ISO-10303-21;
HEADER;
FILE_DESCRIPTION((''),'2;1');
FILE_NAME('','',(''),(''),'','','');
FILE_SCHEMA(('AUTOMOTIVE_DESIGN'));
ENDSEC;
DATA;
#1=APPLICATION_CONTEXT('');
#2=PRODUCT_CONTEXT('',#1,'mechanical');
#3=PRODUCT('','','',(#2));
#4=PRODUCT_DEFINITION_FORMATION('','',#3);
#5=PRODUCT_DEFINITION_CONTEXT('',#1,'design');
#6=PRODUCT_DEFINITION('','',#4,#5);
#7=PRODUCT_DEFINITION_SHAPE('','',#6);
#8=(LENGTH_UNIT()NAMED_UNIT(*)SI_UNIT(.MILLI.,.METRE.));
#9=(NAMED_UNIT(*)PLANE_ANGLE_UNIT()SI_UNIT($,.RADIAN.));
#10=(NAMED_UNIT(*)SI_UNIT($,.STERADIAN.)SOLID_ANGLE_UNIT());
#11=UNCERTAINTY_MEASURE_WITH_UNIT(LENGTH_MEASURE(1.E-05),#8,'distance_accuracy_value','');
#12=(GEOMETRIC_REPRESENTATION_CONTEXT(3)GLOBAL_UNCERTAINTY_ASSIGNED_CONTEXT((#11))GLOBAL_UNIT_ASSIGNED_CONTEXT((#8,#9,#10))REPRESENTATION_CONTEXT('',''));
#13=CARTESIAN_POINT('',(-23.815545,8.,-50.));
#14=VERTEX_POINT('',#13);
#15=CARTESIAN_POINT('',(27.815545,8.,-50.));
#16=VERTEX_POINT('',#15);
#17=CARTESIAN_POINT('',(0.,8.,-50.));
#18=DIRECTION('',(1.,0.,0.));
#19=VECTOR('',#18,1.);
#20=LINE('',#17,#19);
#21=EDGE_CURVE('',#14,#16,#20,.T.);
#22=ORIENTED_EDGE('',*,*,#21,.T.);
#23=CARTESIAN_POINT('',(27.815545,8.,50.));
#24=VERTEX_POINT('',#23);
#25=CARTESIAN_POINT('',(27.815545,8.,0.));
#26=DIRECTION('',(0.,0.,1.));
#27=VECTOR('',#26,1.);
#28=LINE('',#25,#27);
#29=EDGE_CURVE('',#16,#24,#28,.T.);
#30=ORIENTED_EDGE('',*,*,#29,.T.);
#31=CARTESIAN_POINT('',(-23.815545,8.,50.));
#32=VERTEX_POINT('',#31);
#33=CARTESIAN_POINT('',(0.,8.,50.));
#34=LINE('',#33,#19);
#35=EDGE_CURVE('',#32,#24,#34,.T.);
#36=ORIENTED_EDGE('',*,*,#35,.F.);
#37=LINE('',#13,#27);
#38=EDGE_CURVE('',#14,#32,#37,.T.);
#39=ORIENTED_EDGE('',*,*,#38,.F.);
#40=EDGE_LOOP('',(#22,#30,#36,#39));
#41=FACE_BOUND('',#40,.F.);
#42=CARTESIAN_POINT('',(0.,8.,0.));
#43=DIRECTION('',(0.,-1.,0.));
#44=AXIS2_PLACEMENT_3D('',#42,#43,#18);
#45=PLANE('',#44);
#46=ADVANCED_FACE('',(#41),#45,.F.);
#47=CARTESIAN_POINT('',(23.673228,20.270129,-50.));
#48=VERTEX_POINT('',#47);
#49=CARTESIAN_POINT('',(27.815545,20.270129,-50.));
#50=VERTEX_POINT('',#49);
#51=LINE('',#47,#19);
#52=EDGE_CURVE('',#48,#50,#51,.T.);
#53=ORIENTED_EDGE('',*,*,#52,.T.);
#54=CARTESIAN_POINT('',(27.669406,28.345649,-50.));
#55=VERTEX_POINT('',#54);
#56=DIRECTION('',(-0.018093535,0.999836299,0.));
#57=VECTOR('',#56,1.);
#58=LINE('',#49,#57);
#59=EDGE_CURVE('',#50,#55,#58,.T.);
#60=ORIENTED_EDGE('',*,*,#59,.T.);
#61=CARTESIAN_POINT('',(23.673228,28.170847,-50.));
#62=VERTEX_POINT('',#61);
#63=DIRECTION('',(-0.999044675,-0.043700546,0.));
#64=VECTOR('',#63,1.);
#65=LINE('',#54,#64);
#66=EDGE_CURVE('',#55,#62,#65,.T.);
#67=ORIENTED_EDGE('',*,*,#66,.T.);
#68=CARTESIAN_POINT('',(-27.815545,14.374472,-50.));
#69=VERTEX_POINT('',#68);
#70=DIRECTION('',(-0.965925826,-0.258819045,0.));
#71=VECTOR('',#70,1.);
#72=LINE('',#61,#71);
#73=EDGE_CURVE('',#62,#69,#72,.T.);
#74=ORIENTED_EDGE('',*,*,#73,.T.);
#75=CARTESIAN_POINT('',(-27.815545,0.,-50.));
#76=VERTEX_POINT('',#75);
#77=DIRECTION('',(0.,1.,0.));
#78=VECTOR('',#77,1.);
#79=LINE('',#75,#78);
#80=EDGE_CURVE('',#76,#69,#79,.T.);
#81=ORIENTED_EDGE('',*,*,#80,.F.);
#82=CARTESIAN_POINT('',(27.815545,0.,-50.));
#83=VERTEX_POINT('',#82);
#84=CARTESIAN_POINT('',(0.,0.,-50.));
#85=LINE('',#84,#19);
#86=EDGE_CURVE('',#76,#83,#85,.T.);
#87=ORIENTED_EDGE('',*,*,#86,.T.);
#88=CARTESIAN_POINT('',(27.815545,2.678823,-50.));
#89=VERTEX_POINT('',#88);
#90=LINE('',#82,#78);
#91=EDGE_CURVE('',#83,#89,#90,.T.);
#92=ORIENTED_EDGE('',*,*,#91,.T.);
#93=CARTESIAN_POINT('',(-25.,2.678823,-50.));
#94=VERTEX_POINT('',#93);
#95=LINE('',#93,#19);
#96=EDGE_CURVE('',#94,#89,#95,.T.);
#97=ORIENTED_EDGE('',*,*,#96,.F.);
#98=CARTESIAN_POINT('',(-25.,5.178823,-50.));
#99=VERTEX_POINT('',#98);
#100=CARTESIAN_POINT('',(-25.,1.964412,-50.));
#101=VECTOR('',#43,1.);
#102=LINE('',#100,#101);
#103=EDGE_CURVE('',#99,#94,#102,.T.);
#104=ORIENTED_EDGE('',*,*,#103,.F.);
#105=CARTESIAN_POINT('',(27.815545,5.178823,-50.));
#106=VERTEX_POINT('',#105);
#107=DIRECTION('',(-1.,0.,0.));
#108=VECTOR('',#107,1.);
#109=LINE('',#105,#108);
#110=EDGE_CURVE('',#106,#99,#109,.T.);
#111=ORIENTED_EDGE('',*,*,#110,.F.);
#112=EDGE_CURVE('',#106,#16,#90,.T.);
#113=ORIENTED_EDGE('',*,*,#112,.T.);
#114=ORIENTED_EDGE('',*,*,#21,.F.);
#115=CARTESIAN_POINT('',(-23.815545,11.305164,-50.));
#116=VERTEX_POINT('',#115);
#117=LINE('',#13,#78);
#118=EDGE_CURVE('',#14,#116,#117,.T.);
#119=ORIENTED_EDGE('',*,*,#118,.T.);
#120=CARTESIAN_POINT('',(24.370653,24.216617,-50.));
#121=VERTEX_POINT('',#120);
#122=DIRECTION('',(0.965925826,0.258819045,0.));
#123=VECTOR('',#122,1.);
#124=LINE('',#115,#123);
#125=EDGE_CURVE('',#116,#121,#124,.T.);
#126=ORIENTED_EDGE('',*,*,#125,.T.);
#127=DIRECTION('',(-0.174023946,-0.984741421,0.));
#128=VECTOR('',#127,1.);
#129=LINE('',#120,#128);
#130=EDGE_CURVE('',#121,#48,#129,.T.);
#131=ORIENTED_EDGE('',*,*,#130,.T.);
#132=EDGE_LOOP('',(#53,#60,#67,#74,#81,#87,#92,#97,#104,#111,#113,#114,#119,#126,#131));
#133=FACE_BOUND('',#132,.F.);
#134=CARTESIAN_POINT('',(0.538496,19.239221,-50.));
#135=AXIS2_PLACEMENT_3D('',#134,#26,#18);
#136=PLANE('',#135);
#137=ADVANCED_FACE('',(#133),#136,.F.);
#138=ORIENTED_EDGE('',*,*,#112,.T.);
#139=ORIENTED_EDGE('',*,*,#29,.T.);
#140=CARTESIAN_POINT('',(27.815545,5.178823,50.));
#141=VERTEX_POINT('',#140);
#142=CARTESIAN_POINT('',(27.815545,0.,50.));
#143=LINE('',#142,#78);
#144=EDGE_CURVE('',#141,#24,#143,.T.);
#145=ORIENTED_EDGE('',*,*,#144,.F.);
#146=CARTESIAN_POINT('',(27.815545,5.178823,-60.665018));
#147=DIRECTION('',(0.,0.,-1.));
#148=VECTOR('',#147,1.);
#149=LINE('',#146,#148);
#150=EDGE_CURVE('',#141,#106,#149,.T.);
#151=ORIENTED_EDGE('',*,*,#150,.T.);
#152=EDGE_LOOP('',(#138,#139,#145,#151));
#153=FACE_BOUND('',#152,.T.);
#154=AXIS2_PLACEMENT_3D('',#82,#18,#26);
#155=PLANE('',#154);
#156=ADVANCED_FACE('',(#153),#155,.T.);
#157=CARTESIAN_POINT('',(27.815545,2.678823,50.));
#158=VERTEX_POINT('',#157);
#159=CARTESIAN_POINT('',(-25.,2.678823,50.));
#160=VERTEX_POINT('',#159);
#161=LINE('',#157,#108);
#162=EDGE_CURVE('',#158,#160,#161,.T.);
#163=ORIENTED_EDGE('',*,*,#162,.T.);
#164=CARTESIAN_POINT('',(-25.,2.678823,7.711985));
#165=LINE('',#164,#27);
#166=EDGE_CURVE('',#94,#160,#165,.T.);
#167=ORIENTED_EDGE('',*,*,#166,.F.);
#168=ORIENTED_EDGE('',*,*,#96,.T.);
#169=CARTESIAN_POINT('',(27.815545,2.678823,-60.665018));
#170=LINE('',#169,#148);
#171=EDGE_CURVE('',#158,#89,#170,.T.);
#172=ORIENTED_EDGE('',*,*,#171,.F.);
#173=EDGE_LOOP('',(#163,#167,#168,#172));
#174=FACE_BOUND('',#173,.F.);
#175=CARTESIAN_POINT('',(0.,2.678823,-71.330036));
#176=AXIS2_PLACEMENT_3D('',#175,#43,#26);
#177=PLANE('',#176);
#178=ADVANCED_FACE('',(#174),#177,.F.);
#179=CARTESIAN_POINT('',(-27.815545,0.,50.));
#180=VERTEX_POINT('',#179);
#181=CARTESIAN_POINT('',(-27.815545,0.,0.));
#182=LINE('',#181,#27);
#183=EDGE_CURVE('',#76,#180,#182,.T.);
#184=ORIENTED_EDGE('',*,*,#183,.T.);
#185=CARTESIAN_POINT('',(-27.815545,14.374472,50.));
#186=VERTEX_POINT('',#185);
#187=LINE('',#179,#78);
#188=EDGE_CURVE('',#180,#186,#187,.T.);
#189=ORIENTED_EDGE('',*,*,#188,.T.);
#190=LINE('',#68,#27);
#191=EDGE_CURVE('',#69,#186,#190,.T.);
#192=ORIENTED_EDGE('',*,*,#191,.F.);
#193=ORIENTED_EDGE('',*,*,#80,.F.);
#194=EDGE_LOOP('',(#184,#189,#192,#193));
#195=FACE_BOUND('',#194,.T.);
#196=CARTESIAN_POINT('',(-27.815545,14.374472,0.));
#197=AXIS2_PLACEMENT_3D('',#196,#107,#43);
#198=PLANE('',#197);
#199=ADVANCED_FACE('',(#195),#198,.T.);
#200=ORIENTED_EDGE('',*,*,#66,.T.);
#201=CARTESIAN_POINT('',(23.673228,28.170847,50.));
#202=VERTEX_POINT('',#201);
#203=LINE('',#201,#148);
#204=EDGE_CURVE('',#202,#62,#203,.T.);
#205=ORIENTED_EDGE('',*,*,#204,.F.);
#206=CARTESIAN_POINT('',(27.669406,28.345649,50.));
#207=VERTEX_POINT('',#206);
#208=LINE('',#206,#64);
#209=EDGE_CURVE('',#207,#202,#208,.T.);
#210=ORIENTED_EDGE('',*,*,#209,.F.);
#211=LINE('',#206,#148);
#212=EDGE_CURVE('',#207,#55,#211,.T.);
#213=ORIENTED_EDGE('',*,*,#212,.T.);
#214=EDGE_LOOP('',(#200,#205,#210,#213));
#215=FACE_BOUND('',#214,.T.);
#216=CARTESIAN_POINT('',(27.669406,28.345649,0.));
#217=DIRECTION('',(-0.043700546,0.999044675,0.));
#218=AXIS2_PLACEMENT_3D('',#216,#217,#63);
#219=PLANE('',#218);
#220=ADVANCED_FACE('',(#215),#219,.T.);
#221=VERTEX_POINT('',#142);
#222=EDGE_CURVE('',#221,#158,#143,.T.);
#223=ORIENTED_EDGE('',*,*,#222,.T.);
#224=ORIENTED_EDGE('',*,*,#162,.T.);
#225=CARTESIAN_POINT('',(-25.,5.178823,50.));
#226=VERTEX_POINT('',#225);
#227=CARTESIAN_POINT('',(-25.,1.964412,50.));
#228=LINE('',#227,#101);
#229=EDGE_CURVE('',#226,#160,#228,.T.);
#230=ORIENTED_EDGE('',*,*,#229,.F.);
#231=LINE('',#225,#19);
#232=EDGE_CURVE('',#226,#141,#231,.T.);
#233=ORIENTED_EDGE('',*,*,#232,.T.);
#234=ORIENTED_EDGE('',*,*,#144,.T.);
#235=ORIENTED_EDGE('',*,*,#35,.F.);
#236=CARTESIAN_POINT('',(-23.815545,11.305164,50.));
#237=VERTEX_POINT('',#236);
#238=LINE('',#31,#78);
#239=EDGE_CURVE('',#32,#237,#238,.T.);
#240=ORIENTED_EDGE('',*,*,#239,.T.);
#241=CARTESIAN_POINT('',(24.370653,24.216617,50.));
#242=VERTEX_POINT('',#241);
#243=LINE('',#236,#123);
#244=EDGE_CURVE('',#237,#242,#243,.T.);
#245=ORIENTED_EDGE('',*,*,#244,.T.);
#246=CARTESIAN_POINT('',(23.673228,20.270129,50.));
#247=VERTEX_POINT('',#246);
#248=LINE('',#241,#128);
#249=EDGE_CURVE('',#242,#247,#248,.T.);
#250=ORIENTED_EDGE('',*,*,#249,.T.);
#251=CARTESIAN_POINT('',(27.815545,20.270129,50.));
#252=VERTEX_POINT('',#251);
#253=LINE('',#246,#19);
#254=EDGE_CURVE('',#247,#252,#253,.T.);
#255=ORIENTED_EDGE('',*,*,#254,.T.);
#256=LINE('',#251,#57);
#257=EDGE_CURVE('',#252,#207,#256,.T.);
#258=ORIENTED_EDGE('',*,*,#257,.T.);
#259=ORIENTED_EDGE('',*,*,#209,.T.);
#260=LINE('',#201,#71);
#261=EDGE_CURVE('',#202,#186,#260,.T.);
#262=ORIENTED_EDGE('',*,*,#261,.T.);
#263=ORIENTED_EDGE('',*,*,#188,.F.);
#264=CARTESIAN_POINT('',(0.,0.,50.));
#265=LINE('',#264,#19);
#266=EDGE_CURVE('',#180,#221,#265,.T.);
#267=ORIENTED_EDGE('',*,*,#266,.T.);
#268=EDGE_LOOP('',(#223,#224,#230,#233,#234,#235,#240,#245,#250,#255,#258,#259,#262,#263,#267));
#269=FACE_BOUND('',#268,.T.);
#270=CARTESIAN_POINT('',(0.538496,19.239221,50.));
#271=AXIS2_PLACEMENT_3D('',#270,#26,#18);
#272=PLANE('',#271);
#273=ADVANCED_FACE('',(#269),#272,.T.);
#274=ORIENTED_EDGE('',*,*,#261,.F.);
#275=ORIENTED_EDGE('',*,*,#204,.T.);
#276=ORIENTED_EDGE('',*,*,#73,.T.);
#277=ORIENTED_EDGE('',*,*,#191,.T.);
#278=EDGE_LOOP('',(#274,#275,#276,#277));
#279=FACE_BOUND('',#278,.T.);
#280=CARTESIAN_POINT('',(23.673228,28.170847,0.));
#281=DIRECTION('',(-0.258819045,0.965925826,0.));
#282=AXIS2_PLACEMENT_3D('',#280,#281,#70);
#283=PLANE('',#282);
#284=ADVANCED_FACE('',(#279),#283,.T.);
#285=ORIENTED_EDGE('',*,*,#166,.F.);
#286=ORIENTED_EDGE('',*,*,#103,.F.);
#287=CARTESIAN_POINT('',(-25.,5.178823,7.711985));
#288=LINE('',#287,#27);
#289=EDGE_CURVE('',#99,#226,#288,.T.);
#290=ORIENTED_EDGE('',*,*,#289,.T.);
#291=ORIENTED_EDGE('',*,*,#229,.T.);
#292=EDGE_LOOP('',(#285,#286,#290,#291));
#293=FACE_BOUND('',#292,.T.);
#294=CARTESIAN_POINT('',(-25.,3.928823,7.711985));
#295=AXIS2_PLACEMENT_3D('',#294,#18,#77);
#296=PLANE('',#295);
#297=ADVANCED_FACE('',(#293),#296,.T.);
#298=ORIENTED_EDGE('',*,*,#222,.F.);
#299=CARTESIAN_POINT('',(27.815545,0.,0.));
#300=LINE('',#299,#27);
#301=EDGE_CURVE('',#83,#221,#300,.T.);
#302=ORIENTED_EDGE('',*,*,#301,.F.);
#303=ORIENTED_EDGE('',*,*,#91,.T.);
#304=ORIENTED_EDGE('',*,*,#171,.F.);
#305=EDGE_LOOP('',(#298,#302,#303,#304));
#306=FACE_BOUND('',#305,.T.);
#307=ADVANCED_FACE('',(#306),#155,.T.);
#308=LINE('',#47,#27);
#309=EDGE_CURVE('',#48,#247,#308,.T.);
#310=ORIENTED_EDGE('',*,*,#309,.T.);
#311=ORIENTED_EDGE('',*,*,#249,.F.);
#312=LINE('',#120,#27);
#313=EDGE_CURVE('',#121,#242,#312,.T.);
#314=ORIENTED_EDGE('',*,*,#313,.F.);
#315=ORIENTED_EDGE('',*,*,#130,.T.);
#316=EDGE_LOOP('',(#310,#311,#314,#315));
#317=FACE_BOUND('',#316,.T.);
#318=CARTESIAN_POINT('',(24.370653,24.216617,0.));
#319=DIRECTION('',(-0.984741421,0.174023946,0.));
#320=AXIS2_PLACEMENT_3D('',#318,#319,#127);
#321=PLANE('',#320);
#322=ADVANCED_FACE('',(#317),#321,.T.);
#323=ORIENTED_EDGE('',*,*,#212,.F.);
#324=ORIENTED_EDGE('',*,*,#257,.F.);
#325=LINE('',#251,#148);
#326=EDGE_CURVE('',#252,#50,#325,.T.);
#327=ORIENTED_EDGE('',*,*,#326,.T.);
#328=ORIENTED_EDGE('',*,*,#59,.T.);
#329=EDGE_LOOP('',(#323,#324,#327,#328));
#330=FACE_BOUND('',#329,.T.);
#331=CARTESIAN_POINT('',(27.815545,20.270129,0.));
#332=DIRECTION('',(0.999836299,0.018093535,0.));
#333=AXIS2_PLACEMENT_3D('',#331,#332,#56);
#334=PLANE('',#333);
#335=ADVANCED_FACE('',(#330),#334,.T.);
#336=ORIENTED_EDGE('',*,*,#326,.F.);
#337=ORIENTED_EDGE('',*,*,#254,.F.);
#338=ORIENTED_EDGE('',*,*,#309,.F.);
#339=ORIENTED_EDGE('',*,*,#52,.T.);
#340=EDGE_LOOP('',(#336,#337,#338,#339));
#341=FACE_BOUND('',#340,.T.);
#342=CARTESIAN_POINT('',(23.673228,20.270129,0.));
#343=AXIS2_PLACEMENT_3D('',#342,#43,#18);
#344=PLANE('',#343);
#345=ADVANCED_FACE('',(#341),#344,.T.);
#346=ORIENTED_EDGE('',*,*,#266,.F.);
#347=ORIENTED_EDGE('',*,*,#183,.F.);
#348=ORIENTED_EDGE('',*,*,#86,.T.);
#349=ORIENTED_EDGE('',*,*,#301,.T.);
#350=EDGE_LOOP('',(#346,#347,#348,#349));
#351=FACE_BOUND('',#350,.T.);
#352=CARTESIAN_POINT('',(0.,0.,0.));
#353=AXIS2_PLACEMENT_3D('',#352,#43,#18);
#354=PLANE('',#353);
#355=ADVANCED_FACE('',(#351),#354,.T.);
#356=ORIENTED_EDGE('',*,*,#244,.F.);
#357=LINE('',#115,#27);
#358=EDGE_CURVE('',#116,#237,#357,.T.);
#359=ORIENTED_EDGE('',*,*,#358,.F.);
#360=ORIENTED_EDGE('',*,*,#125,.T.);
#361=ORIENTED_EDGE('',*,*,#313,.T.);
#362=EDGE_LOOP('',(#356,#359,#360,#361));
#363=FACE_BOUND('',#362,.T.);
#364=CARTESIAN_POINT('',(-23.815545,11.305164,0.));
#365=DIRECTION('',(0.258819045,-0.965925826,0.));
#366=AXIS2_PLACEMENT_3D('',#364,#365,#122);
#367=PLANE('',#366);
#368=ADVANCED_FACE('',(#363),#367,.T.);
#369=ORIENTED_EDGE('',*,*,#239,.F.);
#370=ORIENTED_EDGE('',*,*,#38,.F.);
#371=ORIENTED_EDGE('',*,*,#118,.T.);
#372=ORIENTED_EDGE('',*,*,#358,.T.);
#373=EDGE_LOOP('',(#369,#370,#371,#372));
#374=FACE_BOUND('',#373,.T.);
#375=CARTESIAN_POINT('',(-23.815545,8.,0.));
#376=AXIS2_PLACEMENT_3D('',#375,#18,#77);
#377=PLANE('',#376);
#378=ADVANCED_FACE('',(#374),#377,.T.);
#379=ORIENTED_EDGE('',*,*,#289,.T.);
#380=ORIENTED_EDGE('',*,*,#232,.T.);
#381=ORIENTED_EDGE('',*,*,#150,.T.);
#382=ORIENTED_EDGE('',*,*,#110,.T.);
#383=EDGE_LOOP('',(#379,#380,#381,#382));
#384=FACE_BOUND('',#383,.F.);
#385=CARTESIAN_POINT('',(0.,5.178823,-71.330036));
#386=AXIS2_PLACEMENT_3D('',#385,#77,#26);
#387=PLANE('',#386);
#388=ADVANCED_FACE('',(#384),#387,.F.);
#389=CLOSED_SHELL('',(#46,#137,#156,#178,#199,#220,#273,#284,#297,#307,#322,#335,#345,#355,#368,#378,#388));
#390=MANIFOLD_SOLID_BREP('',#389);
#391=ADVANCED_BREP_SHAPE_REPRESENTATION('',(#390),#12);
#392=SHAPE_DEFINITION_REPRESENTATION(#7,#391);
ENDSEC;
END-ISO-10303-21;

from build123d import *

# Parameters (mm, degrees)
F0_W          = 55.6310900272
F0_H          = 100
F1_DEPTH      = 8
F2_W          = 2.5
F2_H          = 158.0840436167
F3_DEPTH      = 27.8165450136
F3_DEPTH_BACK = 25
F5_DEPTH      = 50


# Not quite as in the source:
# - a feature names something its author has since deleted; it is built from what else it names


with BuildPart() as f1:
    # F0 (on Front) → F1 (new body)
    with BuildSketch(Plane.XZ):
        Rectangle(F0_W, F0_H)
    extrude(amount=-F1_DEPTH)

    # F2 (on Right) → F3 (cut, two sides)
    with BuildSketch(Plane.YZ) as f3_sk:
        with Locations((3.9288233686, 7.7119854566)):
            Rectangle(F2_W, F2_H)
    extrude(amount=F3_DEPTH, mode=Mode.SUBTRACT)
    extrude(f3_sk.sketch, amount=-F3_DEPTH_BACK, mode=Mode.SUBTRACT)

    # F4 (on Top) → F5 (join, symmetric)
    with BuildSketch(Plane.XY):
        Polygon((23.6732276815, 28.1708468052), (-27.8155450136, 14.3744717422), (-27.8155450136, 8), (-23.8155450136, 8), (-23.8155450136, 11.3051637903), (24.3706528022, 24.2166165814), (23.6732276815, 20.2701286405), (27.8155450136, 20.2701286405), (27.6694063807, 28.3456489901), align=None)
    extrude(amount=F5_DEPTH, both=True)


solid = f1.part
